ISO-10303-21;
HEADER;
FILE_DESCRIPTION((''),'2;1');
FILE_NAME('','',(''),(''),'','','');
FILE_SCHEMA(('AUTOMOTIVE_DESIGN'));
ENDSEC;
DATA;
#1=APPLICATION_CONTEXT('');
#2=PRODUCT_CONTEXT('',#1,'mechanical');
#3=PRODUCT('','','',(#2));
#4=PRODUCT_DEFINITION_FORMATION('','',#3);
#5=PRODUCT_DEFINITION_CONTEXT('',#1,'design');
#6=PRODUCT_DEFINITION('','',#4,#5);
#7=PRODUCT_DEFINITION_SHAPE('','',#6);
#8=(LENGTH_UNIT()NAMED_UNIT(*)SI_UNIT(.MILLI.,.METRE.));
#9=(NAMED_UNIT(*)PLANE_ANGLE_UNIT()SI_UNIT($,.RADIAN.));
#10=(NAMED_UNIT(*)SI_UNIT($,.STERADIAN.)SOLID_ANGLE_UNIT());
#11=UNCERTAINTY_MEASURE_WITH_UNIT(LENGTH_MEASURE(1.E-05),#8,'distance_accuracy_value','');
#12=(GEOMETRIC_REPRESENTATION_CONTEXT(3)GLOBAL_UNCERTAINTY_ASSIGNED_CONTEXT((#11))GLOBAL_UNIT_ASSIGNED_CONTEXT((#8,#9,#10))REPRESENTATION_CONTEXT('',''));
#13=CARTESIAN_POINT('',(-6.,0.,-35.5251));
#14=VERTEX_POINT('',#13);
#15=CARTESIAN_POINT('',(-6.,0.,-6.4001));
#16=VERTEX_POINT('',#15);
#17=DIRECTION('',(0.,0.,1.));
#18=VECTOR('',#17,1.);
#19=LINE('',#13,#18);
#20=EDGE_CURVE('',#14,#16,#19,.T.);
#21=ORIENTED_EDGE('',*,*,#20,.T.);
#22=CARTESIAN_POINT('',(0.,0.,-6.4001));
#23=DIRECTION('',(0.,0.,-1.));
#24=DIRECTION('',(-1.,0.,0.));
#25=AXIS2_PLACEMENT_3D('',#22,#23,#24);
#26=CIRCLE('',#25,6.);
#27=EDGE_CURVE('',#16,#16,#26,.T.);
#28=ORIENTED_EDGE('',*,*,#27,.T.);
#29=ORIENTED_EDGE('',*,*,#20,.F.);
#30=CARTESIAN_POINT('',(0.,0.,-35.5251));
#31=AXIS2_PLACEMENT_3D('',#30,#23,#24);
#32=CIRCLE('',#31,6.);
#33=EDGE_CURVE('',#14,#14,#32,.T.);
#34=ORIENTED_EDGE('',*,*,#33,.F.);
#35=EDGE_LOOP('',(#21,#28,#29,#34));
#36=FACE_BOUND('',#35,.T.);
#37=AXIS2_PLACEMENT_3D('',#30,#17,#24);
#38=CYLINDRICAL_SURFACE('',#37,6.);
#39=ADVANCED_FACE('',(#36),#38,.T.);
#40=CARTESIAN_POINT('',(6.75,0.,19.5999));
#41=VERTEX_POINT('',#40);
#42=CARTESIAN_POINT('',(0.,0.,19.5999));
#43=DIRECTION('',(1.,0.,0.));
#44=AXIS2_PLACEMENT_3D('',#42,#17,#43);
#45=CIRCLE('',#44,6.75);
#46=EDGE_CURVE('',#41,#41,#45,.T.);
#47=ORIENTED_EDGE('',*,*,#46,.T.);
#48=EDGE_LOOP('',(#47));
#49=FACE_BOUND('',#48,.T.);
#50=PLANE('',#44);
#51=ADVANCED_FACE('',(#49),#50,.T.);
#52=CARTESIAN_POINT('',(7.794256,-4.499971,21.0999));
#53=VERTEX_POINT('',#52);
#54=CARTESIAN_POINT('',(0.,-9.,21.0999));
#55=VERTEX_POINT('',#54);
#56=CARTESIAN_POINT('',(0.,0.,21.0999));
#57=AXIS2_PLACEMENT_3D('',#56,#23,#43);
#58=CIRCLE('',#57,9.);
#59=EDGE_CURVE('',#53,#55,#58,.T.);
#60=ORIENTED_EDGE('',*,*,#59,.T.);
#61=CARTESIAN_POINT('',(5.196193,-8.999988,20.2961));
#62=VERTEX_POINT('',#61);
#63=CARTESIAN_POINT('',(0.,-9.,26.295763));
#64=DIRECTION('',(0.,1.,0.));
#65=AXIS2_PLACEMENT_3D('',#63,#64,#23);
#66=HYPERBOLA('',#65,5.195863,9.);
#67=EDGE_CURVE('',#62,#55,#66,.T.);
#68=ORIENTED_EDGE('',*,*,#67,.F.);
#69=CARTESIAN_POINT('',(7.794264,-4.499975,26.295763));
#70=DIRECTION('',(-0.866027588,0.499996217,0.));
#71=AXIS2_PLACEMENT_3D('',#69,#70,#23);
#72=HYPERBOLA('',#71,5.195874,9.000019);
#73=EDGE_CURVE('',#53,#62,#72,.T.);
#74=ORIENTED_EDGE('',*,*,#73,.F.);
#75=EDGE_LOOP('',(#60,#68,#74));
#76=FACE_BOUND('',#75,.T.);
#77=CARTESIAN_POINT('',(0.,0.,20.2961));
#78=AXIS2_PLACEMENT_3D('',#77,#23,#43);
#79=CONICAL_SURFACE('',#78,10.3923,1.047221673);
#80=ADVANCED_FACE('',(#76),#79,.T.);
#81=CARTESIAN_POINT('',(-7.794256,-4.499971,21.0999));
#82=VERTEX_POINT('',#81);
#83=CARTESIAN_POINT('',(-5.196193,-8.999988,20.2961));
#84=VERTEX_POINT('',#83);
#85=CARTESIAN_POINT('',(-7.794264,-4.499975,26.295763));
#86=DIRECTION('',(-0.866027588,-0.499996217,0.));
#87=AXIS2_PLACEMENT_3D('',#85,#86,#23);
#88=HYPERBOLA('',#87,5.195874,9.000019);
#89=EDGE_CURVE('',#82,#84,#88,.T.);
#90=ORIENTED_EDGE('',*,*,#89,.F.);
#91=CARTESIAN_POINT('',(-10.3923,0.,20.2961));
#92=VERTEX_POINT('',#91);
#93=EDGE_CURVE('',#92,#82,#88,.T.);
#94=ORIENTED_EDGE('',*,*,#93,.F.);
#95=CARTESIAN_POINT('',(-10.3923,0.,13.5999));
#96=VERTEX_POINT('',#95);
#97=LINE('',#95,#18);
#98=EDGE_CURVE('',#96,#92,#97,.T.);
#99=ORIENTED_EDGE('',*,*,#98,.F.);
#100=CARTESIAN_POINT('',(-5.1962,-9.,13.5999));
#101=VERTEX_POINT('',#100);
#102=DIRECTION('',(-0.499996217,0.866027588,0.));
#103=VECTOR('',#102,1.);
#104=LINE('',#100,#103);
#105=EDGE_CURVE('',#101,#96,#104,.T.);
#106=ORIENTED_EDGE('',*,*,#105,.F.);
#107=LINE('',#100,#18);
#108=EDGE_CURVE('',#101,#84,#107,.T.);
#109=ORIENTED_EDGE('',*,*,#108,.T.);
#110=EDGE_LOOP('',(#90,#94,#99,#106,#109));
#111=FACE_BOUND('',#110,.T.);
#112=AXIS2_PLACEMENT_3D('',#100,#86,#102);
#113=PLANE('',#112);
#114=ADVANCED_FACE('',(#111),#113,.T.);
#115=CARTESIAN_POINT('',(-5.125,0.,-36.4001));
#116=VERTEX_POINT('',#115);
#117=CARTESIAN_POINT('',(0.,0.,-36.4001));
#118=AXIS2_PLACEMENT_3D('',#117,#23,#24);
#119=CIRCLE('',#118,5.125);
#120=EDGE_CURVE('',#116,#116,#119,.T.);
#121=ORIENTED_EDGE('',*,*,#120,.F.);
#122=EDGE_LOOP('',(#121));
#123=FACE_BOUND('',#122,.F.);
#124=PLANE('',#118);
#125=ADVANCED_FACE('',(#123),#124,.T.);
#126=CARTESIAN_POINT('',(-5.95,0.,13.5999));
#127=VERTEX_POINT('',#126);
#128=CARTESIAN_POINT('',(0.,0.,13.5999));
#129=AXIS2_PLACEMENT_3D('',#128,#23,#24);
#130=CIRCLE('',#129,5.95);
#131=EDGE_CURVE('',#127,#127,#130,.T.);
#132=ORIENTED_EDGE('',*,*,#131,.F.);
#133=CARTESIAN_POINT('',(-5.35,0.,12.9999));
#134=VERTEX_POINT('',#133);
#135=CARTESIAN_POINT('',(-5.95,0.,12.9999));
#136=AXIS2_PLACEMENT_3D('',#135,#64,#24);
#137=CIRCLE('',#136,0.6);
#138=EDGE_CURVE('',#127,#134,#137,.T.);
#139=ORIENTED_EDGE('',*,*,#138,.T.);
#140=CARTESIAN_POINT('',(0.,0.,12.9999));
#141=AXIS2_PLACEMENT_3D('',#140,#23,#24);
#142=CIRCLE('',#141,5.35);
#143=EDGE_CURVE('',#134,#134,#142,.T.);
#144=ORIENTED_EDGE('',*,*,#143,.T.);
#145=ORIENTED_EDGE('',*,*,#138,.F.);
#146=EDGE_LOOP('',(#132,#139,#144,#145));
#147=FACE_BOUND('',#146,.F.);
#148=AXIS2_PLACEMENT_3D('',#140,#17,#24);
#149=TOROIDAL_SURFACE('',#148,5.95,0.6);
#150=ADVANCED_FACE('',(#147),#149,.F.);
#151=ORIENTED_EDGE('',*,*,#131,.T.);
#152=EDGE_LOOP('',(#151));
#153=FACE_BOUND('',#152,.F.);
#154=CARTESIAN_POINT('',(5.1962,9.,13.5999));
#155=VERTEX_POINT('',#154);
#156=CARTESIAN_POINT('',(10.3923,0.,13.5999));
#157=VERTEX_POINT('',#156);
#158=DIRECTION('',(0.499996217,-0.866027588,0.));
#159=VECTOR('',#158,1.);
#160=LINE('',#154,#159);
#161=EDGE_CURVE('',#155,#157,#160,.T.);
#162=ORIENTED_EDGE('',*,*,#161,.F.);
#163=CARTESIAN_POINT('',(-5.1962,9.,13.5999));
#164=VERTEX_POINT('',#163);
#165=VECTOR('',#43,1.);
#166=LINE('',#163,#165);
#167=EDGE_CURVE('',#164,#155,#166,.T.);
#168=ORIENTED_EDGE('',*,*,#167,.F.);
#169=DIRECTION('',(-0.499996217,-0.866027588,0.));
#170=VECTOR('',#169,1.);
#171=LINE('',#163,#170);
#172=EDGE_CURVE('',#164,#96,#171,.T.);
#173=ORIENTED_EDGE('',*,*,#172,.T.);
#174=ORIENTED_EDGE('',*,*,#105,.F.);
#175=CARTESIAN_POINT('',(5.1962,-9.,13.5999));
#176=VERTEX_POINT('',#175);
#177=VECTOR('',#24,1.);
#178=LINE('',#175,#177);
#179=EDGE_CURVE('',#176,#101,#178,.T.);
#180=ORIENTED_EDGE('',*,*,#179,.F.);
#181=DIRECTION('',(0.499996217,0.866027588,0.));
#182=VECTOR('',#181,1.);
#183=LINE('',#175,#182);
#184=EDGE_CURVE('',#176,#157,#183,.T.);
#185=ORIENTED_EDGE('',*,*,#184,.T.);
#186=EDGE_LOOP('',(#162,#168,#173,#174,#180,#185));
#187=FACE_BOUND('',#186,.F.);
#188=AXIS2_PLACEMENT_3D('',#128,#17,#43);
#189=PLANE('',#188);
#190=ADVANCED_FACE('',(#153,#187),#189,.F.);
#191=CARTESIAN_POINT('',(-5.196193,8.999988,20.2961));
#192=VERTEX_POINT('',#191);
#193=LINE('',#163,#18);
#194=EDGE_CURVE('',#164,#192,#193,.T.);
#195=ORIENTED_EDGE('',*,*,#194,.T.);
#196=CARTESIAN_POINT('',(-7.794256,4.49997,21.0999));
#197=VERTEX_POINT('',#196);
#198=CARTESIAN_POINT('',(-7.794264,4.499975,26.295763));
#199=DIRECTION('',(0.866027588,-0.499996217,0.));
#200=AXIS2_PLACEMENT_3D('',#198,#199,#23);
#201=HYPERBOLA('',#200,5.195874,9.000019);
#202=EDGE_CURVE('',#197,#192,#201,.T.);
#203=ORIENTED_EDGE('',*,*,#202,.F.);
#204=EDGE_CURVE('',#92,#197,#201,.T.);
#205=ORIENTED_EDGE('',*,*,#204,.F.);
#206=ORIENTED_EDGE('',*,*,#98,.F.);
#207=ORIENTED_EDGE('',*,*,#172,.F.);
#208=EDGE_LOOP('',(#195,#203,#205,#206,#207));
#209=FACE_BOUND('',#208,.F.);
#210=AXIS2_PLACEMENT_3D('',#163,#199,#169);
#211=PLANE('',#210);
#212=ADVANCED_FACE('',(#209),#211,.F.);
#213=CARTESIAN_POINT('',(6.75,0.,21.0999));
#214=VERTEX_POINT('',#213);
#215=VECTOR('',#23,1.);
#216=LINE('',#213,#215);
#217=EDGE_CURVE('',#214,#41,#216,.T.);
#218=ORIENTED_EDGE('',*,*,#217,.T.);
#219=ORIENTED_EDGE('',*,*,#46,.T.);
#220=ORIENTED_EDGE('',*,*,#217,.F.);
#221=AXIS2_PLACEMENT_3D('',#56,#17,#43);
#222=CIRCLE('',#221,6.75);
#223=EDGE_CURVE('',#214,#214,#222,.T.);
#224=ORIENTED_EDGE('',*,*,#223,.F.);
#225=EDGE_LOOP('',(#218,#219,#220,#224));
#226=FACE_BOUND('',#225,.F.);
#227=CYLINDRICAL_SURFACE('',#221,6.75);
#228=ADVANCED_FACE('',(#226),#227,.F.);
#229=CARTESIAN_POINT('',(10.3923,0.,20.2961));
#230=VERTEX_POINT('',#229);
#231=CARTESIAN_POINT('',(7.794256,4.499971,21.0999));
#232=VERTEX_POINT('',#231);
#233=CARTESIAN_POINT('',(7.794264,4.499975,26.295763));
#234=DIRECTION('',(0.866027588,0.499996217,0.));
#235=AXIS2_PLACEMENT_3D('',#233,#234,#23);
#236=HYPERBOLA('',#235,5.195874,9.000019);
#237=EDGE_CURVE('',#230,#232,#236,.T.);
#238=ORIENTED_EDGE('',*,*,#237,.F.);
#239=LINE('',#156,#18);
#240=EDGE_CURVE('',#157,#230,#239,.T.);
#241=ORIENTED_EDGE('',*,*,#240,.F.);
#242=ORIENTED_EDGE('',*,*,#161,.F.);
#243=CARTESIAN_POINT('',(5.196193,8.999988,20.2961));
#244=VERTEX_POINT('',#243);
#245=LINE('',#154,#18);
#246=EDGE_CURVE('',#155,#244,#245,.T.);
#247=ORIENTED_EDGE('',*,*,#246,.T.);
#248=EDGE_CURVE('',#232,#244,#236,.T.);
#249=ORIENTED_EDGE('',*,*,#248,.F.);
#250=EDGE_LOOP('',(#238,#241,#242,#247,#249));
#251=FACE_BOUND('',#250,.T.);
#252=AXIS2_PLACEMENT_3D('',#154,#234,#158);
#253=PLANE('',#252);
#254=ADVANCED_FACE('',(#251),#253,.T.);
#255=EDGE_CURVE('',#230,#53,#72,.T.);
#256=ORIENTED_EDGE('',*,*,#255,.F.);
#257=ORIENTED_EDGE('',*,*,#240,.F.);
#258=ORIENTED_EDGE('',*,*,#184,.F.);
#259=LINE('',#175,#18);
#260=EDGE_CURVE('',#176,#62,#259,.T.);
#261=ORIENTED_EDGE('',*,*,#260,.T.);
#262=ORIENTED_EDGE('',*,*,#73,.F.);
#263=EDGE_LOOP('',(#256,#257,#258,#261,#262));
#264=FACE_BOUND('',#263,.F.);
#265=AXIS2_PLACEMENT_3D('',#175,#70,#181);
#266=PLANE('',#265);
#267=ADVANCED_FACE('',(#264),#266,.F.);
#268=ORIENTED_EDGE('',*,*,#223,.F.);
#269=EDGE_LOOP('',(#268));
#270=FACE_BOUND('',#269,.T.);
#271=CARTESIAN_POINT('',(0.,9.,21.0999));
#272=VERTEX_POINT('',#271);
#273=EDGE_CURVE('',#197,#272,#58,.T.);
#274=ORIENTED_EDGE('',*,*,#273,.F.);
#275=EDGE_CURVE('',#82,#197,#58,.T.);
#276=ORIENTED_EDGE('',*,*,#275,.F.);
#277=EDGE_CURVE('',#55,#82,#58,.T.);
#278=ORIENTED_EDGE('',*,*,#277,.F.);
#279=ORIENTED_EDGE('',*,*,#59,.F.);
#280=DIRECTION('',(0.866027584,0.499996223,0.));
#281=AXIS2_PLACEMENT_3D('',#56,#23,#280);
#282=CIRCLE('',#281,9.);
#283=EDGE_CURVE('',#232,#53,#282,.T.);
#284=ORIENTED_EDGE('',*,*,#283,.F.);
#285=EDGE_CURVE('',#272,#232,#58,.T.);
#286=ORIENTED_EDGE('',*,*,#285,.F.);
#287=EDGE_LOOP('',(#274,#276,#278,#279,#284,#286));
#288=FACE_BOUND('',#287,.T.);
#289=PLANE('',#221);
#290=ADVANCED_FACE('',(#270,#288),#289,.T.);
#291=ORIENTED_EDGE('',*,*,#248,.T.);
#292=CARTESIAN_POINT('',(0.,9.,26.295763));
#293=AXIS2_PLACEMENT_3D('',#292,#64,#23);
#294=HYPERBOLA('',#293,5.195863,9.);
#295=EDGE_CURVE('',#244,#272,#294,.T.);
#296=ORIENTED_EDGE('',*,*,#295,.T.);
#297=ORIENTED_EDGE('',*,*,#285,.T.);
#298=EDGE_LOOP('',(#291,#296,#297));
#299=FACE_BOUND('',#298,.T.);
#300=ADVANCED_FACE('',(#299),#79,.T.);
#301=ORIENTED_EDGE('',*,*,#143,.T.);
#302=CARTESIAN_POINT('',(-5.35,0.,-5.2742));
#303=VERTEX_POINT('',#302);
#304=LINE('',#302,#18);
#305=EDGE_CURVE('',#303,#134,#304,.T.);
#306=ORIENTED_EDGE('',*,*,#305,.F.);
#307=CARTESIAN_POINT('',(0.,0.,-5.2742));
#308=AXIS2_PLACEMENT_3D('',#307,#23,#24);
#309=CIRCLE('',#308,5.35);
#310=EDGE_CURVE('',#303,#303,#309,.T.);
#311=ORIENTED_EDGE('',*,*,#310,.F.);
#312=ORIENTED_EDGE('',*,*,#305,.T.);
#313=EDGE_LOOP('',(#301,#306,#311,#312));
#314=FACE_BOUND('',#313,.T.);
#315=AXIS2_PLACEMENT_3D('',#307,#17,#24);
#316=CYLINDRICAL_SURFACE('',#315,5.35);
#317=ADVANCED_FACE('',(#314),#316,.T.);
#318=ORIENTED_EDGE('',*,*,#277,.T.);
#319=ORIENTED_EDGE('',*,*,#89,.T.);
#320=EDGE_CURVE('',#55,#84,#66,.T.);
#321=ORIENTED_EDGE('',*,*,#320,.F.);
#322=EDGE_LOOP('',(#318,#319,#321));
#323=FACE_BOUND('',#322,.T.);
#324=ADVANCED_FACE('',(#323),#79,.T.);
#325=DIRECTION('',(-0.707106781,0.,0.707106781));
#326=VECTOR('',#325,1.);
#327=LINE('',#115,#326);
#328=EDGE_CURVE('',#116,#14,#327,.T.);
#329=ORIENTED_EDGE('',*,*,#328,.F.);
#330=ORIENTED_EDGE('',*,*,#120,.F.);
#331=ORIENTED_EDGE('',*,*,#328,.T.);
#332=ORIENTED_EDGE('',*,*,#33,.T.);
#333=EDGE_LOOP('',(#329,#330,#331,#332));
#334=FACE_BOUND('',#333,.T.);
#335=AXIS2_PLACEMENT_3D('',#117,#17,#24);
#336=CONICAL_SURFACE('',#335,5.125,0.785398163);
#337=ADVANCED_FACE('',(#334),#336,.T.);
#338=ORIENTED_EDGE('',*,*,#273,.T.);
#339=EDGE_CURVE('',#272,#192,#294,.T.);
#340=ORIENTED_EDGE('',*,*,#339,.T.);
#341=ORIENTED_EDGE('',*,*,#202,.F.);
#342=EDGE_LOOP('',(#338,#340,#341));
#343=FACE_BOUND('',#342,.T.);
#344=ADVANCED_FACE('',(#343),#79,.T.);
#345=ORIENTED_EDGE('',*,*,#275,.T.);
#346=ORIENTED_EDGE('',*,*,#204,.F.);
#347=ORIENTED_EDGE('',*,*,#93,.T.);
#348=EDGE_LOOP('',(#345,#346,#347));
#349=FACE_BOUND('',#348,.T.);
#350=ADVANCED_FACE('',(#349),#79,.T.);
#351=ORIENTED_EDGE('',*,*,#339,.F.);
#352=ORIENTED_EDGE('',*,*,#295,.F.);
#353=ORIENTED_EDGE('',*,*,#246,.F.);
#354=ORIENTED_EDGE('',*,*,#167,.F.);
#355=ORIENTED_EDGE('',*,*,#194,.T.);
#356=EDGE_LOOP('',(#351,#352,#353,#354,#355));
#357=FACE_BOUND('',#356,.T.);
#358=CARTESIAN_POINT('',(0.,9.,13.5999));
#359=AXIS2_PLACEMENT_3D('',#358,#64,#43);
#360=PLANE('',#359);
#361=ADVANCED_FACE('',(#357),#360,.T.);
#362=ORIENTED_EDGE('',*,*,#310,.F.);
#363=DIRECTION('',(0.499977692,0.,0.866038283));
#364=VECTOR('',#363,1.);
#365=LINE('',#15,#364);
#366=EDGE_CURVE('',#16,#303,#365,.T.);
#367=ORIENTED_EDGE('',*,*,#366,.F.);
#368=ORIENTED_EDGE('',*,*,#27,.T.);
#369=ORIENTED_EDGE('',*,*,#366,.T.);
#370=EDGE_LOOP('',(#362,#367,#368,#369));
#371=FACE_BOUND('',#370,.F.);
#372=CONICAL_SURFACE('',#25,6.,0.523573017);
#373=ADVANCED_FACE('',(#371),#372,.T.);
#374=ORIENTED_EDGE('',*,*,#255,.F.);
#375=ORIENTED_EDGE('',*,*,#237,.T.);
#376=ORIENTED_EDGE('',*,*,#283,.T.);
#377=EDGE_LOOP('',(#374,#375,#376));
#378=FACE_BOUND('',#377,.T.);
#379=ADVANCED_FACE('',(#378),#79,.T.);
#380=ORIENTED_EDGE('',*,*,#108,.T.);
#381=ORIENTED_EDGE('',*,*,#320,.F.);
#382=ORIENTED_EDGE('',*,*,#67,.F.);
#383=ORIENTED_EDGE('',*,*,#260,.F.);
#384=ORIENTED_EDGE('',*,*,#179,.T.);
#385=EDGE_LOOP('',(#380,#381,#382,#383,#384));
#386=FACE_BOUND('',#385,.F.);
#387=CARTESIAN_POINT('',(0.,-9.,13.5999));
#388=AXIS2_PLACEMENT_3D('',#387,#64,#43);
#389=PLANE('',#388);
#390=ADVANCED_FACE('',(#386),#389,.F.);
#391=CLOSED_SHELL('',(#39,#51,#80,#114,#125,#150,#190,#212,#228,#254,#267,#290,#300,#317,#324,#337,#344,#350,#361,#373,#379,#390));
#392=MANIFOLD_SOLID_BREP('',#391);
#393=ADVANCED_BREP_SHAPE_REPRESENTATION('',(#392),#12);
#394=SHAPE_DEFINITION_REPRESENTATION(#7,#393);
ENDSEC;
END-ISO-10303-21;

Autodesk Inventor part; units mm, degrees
ref_plane "YZ Plane" through (0, 0, 0) normal (1, 0, 0) x (0, 1, 0)
sketch "Sketch2" plane through (0, 0, 0) normal (0, 1, 0) x (-1, 0, 0)
  line L0 (0, 13.5999) -> (0, -36.4001)
  line L1 (0, -36.4001) -> (5.125, -36.4001)
  line L2 (6, -35.5251) -> (6, -6.4001)
  line L3 (6, -6.4001) -> (5.35, -5.2742)
  line L4 (5.35, -5.2742) -> (5.35, 13.5999)
  line L5 (5.35, 13.5999) -> (0, 13.5999)
  line L6 (5.125, -36.4001) -> (6, -35.5251)
  line L7 (6, -36.4001) -> (6, -37.6375)
  line L8 (0, -47.885) -> (0, 23.8474) projected
  dimension "Ds" = 10.7
  dimension "NND" = 12
  dimension "b" = 30
  dimension "d3" = 30
  dimension "d5" = 45
  dimension "PTC" = 1.75
  dimension "NLG" = 50
revolve "Revolution1" add sketch "Sketch2" angle 360 about axis through (0, 0, 13.5999) along (0, 0, -1)
sketch "Sketch3" plane through (0, 0, 13.5999) normal (0, 0, 1) x (1, 0, 0)
  circle A0 centre (0, 0) radius 5.35 projected
  line L0 (0, 9) -> (5.1962, 9)
  line L1 (5.1962, 9) -> (10.3923, 0)
  line L2 (10.3923, 0) -> (0, 0)
  line L3 (0, 0) -> (0, 9)
  line L4 (0, 9) -> (-5.1962, 9)
  line L5 (-5.1962, 9) -> (-10.3923, 0)
  line L6 (0, -9) -> (5.1962, -9)
  line L7 (5.1962, -9) -> (10.3923, 0)
  line L8 (-5.1962, -9) -> (-10.3923, 0)
  line L9 (0, -9) -> (-5.1962, -9)
  dimension "d9" = 60
  dimension "ParS" = 18
  dimension "msp_d11" = 18
extrude "Extrusion1" add sketch "Sketch3" along normal blind 7.5
sketch "Sketch4" plane through (0, 0, 0) normal (0, 1, 0) x (-1, 0, 0)
  line L0 (-9, 21.0999) -> (-10.3923, 21.0999)
  line L1 (-10.3923, 21.0999) -> (-10.3923, 20.2961)
  line L2 (-10.3923, 20.2961) -> (-9, 21.0999)
  line L3 (0, 10.7234) -> (0, 30.8591) projected
  line L4 (0, 27.9826) -> (0, 27.1787)
  line L5 (-10.3923, 13.5999) -> (-10.3923, 21.0999) projected
  line L6 (-5.1962, 21.0999) -> (-10.3923, 21.0999) projected
  dimension "d14" = 30
  dimension "msp_d15" = 18
revolve "Revolution2" cut sketch "Sketch4" angle 360 about axis through (0, 0, 27.9826) along (0, 0, -1)
sketch "Sketch5" plane through (0, 0, 21.0999) normal (0, 0, 1) x (1, 0, 0)
  arc A0 (7.7942, 4.5) -> (0, 9) centre (0, 0) ccw projected
  circle A1 centre (0, 0) radius 6.75
  dimension "d27" = 13.5
extrude "Extrusion2" cut sketch "Sketch5" against normal blind 1.5
thread "Thread1" size "M12x1.75" class "6g" standard "ISO Metric profile" full length
ref_plane "MSC_PF1" through (0, 0, 0) normal (0, 1, 0) x (-1, 0, 0)
ref_plane "MSC_PT1" through (0, 0, 13.5999) normal (0, 0, -1) x (-1, 0, 0)
fillet "Fillet1" radius 0.6 1 edges at (5.35, 0, 13.5999)
equation "\"msp_d11\" = ParS"
equation "\"msp_d15\" = ParS"
equation "\"d27\" = 0.75 * ParS"
equation "\"d28\" = 0.2 * ParK"
equation "\"d30\" = r"
equation "\"msp_d17\" = b"
equation "\"r\" = 0.6"
equation "\"THREADDIA\" = NND"
equation "\"ParK\" = 7.5"
properties part number "ISO 4015 - M12 x 50" material "Stainless Steel, 440C"
